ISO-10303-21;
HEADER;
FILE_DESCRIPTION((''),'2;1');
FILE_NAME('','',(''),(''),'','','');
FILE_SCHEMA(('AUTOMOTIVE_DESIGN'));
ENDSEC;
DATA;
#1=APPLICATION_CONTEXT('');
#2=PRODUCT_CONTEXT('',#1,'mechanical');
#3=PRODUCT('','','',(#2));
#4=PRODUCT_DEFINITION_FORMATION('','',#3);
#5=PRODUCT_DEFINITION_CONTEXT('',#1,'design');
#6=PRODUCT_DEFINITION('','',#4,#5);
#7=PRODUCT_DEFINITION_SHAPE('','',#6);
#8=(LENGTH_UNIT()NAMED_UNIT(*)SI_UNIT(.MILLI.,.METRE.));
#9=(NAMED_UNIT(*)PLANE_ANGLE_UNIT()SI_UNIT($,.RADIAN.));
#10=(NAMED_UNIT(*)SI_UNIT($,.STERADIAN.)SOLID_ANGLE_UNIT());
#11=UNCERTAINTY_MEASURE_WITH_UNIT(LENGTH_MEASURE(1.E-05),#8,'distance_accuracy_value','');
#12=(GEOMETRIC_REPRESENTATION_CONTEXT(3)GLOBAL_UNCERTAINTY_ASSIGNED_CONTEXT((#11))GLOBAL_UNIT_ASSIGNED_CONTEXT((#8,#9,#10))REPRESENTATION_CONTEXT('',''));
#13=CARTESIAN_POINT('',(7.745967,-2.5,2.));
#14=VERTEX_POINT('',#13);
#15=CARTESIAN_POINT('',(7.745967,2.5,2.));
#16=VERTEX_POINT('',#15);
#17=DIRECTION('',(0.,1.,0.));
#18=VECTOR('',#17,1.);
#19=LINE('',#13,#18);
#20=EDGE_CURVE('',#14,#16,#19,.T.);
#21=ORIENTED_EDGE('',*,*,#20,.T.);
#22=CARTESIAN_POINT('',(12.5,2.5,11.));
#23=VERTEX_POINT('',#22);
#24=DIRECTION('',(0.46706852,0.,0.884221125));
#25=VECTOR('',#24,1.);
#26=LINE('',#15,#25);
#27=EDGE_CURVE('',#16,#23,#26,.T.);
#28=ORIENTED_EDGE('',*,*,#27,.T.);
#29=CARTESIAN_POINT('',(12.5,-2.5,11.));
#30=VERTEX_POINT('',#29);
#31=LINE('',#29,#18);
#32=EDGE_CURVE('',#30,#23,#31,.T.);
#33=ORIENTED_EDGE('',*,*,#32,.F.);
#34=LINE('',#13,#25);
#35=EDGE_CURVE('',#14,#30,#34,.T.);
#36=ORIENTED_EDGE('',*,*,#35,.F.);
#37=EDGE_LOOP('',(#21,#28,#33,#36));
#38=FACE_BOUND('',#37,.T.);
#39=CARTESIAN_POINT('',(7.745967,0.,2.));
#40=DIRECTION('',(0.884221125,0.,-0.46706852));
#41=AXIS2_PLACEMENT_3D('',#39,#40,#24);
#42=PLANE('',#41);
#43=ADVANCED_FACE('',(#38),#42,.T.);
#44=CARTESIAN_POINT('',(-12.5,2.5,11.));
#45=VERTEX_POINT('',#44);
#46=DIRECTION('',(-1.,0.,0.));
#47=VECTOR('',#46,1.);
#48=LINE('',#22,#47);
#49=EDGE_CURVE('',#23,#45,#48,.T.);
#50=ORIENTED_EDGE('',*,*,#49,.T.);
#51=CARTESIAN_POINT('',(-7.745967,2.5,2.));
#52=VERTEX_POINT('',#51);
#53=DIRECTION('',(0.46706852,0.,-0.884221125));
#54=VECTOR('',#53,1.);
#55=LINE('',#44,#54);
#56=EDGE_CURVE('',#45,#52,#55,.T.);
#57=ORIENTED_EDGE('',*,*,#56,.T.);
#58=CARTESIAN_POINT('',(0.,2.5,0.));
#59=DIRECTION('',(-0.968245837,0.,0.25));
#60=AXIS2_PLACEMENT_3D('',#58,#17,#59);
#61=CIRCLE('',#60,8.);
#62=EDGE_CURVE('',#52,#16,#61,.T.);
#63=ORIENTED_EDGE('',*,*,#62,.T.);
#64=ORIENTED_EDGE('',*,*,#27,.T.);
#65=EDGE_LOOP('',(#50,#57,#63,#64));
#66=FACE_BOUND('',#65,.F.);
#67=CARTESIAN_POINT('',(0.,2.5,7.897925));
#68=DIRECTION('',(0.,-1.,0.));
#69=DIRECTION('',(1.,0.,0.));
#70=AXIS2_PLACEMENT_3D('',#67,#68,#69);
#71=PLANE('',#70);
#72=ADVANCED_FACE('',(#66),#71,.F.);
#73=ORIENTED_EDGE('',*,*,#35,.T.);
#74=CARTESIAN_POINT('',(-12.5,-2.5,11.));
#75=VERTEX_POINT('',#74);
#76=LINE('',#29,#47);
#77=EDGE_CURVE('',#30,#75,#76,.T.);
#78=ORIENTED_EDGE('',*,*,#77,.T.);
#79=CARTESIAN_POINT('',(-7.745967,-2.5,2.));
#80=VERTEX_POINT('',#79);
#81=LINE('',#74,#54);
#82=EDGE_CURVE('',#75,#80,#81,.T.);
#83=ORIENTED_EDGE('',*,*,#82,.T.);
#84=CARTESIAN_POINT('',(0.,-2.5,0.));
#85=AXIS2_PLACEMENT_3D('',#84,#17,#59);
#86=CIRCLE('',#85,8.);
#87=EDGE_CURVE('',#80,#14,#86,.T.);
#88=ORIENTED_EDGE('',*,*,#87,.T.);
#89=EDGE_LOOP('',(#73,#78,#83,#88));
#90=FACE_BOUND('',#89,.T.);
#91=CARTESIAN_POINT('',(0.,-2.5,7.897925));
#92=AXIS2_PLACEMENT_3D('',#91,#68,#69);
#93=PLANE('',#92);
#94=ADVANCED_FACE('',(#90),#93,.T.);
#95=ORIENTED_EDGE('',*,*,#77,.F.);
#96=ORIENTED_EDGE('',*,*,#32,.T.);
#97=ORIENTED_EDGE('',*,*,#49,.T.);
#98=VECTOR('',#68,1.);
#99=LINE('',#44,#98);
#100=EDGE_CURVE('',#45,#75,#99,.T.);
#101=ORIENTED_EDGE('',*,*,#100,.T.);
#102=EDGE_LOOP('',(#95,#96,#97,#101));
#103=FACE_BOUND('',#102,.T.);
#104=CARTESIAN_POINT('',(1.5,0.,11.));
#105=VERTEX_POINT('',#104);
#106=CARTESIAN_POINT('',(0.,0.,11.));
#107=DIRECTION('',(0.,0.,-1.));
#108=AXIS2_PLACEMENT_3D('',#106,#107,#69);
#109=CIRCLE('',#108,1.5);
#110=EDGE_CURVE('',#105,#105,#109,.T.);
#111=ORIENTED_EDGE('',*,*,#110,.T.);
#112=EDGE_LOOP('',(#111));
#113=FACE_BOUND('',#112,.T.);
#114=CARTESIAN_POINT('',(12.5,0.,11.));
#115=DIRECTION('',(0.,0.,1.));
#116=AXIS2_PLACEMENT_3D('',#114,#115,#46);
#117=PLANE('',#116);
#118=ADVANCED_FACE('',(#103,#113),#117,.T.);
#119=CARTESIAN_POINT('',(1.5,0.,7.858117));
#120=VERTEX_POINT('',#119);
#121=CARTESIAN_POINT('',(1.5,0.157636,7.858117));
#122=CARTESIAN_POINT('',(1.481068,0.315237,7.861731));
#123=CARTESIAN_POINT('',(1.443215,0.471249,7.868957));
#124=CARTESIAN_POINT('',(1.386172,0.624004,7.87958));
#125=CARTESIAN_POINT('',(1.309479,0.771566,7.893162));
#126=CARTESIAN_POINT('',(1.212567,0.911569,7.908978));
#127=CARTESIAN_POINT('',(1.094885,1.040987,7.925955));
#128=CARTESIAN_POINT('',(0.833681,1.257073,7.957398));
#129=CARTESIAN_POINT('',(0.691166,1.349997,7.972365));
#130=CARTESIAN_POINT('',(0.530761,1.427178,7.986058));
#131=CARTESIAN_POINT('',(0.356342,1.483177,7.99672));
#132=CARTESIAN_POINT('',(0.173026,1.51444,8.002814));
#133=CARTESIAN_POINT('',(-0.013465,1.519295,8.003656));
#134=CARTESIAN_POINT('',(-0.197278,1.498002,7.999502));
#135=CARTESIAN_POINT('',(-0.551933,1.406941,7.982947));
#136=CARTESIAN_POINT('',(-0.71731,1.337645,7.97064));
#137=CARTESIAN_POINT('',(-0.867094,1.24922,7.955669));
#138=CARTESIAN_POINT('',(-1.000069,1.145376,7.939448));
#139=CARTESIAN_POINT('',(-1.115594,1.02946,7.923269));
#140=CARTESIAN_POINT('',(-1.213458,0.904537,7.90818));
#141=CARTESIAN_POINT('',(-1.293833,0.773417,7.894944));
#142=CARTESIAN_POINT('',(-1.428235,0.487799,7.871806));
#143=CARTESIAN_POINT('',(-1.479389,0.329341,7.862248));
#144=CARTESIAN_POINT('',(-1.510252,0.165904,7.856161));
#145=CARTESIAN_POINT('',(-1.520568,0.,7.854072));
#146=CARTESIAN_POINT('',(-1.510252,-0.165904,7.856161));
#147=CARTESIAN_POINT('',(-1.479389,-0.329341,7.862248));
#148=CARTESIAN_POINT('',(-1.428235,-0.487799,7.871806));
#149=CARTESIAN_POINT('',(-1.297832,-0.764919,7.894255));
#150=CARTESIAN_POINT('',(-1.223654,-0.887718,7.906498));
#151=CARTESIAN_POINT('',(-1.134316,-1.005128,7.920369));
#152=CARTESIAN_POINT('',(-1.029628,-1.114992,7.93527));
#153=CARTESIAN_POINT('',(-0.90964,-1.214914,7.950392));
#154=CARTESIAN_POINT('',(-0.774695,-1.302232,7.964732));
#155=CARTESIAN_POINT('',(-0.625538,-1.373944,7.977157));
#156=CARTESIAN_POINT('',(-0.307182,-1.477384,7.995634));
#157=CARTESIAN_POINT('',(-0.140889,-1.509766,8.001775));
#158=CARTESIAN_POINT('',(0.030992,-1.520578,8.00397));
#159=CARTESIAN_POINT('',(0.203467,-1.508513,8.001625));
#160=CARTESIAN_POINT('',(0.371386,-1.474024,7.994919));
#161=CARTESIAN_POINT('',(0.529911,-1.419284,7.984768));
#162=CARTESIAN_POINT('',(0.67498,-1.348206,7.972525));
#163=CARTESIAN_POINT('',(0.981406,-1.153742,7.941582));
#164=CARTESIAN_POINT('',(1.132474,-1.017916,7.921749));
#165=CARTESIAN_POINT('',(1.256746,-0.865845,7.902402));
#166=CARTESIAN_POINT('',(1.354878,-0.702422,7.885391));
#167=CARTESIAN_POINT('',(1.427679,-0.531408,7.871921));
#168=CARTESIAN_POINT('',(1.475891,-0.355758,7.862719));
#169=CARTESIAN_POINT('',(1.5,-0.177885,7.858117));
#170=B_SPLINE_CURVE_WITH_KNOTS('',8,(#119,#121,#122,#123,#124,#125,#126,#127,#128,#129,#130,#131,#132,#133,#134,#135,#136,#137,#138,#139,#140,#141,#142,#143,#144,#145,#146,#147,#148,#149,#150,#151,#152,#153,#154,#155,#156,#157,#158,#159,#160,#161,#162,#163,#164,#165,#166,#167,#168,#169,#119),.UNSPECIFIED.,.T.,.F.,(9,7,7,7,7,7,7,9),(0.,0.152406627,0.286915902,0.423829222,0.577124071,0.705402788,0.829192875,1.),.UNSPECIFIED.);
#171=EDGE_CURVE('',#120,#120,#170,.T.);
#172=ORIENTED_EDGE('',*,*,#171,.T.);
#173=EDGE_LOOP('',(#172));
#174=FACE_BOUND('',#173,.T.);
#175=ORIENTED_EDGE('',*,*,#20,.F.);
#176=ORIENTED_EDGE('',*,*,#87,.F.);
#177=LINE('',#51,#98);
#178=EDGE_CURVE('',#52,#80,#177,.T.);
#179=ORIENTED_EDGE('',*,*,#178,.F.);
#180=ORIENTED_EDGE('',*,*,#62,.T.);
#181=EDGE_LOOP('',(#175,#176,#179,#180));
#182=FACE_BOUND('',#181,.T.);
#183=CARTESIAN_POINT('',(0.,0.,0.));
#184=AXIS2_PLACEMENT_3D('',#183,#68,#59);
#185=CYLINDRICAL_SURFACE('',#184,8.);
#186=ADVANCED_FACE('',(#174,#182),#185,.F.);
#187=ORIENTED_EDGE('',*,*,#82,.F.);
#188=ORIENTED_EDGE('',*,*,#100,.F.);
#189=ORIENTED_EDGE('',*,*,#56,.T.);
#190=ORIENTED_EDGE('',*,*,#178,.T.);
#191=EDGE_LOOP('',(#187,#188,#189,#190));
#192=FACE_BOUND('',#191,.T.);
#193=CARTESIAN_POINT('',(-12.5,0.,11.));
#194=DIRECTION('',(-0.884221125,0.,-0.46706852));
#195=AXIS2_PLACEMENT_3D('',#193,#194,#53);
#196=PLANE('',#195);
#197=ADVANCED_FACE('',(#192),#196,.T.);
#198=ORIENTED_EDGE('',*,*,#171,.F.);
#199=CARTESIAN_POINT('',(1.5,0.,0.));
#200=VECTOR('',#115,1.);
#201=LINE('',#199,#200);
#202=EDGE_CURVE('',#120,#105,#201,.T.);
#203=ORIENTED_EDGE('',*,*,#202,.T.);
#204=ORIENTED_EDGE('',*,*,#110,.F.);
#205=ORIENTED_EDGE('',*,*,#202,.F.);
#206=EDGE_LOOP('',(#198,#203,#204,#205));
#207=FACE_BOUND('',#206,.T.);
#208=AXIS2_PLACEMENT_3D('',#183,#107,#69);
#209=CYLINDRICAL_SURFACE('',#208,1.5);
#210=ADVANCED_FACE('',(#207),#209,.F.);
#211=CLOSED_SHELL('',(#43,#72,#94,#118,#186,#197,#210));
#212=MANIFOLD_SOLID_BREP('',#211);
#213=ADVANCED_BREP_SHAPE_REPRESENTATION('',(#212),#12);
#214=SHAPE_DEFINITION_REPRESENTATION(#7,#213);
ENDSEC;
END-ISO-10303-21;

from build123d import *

# Parameters (mm, degrees)
F1_DEPTH = 2.5
F2_R     = 1.5
F3_DEPTH = 11.001


# Not quite as in the source:
# - a feature names something its author has since deleted; it is built from what else it names


with BuildPart() as f1:
    # F0 (on Front) → F1 (new body, symmetric)
    with BuildSketch(Plane.XZ):
        with BuildLine():
            Line((12.5, 11), (-12.5, 11))
            Line((-12.5, 11), (-7.7459666924, 2))
            ThreePointArc((-7.7459666924, 2), (0, 8), (7.7459666924, 2))
            Line((7.7459666924, 2), (12.5, 11))
        make_face()
    extrude(amount=F1_DEPTH, both=True)

    # F2 (on Top) → F3 (cut, through all)
    with BuildSketch(Plane.XY):
        Circle(F2_R)
    extrude(amount=F3_DEPTH, mode=Mode.SUBTRACT)


solid = f1.part
